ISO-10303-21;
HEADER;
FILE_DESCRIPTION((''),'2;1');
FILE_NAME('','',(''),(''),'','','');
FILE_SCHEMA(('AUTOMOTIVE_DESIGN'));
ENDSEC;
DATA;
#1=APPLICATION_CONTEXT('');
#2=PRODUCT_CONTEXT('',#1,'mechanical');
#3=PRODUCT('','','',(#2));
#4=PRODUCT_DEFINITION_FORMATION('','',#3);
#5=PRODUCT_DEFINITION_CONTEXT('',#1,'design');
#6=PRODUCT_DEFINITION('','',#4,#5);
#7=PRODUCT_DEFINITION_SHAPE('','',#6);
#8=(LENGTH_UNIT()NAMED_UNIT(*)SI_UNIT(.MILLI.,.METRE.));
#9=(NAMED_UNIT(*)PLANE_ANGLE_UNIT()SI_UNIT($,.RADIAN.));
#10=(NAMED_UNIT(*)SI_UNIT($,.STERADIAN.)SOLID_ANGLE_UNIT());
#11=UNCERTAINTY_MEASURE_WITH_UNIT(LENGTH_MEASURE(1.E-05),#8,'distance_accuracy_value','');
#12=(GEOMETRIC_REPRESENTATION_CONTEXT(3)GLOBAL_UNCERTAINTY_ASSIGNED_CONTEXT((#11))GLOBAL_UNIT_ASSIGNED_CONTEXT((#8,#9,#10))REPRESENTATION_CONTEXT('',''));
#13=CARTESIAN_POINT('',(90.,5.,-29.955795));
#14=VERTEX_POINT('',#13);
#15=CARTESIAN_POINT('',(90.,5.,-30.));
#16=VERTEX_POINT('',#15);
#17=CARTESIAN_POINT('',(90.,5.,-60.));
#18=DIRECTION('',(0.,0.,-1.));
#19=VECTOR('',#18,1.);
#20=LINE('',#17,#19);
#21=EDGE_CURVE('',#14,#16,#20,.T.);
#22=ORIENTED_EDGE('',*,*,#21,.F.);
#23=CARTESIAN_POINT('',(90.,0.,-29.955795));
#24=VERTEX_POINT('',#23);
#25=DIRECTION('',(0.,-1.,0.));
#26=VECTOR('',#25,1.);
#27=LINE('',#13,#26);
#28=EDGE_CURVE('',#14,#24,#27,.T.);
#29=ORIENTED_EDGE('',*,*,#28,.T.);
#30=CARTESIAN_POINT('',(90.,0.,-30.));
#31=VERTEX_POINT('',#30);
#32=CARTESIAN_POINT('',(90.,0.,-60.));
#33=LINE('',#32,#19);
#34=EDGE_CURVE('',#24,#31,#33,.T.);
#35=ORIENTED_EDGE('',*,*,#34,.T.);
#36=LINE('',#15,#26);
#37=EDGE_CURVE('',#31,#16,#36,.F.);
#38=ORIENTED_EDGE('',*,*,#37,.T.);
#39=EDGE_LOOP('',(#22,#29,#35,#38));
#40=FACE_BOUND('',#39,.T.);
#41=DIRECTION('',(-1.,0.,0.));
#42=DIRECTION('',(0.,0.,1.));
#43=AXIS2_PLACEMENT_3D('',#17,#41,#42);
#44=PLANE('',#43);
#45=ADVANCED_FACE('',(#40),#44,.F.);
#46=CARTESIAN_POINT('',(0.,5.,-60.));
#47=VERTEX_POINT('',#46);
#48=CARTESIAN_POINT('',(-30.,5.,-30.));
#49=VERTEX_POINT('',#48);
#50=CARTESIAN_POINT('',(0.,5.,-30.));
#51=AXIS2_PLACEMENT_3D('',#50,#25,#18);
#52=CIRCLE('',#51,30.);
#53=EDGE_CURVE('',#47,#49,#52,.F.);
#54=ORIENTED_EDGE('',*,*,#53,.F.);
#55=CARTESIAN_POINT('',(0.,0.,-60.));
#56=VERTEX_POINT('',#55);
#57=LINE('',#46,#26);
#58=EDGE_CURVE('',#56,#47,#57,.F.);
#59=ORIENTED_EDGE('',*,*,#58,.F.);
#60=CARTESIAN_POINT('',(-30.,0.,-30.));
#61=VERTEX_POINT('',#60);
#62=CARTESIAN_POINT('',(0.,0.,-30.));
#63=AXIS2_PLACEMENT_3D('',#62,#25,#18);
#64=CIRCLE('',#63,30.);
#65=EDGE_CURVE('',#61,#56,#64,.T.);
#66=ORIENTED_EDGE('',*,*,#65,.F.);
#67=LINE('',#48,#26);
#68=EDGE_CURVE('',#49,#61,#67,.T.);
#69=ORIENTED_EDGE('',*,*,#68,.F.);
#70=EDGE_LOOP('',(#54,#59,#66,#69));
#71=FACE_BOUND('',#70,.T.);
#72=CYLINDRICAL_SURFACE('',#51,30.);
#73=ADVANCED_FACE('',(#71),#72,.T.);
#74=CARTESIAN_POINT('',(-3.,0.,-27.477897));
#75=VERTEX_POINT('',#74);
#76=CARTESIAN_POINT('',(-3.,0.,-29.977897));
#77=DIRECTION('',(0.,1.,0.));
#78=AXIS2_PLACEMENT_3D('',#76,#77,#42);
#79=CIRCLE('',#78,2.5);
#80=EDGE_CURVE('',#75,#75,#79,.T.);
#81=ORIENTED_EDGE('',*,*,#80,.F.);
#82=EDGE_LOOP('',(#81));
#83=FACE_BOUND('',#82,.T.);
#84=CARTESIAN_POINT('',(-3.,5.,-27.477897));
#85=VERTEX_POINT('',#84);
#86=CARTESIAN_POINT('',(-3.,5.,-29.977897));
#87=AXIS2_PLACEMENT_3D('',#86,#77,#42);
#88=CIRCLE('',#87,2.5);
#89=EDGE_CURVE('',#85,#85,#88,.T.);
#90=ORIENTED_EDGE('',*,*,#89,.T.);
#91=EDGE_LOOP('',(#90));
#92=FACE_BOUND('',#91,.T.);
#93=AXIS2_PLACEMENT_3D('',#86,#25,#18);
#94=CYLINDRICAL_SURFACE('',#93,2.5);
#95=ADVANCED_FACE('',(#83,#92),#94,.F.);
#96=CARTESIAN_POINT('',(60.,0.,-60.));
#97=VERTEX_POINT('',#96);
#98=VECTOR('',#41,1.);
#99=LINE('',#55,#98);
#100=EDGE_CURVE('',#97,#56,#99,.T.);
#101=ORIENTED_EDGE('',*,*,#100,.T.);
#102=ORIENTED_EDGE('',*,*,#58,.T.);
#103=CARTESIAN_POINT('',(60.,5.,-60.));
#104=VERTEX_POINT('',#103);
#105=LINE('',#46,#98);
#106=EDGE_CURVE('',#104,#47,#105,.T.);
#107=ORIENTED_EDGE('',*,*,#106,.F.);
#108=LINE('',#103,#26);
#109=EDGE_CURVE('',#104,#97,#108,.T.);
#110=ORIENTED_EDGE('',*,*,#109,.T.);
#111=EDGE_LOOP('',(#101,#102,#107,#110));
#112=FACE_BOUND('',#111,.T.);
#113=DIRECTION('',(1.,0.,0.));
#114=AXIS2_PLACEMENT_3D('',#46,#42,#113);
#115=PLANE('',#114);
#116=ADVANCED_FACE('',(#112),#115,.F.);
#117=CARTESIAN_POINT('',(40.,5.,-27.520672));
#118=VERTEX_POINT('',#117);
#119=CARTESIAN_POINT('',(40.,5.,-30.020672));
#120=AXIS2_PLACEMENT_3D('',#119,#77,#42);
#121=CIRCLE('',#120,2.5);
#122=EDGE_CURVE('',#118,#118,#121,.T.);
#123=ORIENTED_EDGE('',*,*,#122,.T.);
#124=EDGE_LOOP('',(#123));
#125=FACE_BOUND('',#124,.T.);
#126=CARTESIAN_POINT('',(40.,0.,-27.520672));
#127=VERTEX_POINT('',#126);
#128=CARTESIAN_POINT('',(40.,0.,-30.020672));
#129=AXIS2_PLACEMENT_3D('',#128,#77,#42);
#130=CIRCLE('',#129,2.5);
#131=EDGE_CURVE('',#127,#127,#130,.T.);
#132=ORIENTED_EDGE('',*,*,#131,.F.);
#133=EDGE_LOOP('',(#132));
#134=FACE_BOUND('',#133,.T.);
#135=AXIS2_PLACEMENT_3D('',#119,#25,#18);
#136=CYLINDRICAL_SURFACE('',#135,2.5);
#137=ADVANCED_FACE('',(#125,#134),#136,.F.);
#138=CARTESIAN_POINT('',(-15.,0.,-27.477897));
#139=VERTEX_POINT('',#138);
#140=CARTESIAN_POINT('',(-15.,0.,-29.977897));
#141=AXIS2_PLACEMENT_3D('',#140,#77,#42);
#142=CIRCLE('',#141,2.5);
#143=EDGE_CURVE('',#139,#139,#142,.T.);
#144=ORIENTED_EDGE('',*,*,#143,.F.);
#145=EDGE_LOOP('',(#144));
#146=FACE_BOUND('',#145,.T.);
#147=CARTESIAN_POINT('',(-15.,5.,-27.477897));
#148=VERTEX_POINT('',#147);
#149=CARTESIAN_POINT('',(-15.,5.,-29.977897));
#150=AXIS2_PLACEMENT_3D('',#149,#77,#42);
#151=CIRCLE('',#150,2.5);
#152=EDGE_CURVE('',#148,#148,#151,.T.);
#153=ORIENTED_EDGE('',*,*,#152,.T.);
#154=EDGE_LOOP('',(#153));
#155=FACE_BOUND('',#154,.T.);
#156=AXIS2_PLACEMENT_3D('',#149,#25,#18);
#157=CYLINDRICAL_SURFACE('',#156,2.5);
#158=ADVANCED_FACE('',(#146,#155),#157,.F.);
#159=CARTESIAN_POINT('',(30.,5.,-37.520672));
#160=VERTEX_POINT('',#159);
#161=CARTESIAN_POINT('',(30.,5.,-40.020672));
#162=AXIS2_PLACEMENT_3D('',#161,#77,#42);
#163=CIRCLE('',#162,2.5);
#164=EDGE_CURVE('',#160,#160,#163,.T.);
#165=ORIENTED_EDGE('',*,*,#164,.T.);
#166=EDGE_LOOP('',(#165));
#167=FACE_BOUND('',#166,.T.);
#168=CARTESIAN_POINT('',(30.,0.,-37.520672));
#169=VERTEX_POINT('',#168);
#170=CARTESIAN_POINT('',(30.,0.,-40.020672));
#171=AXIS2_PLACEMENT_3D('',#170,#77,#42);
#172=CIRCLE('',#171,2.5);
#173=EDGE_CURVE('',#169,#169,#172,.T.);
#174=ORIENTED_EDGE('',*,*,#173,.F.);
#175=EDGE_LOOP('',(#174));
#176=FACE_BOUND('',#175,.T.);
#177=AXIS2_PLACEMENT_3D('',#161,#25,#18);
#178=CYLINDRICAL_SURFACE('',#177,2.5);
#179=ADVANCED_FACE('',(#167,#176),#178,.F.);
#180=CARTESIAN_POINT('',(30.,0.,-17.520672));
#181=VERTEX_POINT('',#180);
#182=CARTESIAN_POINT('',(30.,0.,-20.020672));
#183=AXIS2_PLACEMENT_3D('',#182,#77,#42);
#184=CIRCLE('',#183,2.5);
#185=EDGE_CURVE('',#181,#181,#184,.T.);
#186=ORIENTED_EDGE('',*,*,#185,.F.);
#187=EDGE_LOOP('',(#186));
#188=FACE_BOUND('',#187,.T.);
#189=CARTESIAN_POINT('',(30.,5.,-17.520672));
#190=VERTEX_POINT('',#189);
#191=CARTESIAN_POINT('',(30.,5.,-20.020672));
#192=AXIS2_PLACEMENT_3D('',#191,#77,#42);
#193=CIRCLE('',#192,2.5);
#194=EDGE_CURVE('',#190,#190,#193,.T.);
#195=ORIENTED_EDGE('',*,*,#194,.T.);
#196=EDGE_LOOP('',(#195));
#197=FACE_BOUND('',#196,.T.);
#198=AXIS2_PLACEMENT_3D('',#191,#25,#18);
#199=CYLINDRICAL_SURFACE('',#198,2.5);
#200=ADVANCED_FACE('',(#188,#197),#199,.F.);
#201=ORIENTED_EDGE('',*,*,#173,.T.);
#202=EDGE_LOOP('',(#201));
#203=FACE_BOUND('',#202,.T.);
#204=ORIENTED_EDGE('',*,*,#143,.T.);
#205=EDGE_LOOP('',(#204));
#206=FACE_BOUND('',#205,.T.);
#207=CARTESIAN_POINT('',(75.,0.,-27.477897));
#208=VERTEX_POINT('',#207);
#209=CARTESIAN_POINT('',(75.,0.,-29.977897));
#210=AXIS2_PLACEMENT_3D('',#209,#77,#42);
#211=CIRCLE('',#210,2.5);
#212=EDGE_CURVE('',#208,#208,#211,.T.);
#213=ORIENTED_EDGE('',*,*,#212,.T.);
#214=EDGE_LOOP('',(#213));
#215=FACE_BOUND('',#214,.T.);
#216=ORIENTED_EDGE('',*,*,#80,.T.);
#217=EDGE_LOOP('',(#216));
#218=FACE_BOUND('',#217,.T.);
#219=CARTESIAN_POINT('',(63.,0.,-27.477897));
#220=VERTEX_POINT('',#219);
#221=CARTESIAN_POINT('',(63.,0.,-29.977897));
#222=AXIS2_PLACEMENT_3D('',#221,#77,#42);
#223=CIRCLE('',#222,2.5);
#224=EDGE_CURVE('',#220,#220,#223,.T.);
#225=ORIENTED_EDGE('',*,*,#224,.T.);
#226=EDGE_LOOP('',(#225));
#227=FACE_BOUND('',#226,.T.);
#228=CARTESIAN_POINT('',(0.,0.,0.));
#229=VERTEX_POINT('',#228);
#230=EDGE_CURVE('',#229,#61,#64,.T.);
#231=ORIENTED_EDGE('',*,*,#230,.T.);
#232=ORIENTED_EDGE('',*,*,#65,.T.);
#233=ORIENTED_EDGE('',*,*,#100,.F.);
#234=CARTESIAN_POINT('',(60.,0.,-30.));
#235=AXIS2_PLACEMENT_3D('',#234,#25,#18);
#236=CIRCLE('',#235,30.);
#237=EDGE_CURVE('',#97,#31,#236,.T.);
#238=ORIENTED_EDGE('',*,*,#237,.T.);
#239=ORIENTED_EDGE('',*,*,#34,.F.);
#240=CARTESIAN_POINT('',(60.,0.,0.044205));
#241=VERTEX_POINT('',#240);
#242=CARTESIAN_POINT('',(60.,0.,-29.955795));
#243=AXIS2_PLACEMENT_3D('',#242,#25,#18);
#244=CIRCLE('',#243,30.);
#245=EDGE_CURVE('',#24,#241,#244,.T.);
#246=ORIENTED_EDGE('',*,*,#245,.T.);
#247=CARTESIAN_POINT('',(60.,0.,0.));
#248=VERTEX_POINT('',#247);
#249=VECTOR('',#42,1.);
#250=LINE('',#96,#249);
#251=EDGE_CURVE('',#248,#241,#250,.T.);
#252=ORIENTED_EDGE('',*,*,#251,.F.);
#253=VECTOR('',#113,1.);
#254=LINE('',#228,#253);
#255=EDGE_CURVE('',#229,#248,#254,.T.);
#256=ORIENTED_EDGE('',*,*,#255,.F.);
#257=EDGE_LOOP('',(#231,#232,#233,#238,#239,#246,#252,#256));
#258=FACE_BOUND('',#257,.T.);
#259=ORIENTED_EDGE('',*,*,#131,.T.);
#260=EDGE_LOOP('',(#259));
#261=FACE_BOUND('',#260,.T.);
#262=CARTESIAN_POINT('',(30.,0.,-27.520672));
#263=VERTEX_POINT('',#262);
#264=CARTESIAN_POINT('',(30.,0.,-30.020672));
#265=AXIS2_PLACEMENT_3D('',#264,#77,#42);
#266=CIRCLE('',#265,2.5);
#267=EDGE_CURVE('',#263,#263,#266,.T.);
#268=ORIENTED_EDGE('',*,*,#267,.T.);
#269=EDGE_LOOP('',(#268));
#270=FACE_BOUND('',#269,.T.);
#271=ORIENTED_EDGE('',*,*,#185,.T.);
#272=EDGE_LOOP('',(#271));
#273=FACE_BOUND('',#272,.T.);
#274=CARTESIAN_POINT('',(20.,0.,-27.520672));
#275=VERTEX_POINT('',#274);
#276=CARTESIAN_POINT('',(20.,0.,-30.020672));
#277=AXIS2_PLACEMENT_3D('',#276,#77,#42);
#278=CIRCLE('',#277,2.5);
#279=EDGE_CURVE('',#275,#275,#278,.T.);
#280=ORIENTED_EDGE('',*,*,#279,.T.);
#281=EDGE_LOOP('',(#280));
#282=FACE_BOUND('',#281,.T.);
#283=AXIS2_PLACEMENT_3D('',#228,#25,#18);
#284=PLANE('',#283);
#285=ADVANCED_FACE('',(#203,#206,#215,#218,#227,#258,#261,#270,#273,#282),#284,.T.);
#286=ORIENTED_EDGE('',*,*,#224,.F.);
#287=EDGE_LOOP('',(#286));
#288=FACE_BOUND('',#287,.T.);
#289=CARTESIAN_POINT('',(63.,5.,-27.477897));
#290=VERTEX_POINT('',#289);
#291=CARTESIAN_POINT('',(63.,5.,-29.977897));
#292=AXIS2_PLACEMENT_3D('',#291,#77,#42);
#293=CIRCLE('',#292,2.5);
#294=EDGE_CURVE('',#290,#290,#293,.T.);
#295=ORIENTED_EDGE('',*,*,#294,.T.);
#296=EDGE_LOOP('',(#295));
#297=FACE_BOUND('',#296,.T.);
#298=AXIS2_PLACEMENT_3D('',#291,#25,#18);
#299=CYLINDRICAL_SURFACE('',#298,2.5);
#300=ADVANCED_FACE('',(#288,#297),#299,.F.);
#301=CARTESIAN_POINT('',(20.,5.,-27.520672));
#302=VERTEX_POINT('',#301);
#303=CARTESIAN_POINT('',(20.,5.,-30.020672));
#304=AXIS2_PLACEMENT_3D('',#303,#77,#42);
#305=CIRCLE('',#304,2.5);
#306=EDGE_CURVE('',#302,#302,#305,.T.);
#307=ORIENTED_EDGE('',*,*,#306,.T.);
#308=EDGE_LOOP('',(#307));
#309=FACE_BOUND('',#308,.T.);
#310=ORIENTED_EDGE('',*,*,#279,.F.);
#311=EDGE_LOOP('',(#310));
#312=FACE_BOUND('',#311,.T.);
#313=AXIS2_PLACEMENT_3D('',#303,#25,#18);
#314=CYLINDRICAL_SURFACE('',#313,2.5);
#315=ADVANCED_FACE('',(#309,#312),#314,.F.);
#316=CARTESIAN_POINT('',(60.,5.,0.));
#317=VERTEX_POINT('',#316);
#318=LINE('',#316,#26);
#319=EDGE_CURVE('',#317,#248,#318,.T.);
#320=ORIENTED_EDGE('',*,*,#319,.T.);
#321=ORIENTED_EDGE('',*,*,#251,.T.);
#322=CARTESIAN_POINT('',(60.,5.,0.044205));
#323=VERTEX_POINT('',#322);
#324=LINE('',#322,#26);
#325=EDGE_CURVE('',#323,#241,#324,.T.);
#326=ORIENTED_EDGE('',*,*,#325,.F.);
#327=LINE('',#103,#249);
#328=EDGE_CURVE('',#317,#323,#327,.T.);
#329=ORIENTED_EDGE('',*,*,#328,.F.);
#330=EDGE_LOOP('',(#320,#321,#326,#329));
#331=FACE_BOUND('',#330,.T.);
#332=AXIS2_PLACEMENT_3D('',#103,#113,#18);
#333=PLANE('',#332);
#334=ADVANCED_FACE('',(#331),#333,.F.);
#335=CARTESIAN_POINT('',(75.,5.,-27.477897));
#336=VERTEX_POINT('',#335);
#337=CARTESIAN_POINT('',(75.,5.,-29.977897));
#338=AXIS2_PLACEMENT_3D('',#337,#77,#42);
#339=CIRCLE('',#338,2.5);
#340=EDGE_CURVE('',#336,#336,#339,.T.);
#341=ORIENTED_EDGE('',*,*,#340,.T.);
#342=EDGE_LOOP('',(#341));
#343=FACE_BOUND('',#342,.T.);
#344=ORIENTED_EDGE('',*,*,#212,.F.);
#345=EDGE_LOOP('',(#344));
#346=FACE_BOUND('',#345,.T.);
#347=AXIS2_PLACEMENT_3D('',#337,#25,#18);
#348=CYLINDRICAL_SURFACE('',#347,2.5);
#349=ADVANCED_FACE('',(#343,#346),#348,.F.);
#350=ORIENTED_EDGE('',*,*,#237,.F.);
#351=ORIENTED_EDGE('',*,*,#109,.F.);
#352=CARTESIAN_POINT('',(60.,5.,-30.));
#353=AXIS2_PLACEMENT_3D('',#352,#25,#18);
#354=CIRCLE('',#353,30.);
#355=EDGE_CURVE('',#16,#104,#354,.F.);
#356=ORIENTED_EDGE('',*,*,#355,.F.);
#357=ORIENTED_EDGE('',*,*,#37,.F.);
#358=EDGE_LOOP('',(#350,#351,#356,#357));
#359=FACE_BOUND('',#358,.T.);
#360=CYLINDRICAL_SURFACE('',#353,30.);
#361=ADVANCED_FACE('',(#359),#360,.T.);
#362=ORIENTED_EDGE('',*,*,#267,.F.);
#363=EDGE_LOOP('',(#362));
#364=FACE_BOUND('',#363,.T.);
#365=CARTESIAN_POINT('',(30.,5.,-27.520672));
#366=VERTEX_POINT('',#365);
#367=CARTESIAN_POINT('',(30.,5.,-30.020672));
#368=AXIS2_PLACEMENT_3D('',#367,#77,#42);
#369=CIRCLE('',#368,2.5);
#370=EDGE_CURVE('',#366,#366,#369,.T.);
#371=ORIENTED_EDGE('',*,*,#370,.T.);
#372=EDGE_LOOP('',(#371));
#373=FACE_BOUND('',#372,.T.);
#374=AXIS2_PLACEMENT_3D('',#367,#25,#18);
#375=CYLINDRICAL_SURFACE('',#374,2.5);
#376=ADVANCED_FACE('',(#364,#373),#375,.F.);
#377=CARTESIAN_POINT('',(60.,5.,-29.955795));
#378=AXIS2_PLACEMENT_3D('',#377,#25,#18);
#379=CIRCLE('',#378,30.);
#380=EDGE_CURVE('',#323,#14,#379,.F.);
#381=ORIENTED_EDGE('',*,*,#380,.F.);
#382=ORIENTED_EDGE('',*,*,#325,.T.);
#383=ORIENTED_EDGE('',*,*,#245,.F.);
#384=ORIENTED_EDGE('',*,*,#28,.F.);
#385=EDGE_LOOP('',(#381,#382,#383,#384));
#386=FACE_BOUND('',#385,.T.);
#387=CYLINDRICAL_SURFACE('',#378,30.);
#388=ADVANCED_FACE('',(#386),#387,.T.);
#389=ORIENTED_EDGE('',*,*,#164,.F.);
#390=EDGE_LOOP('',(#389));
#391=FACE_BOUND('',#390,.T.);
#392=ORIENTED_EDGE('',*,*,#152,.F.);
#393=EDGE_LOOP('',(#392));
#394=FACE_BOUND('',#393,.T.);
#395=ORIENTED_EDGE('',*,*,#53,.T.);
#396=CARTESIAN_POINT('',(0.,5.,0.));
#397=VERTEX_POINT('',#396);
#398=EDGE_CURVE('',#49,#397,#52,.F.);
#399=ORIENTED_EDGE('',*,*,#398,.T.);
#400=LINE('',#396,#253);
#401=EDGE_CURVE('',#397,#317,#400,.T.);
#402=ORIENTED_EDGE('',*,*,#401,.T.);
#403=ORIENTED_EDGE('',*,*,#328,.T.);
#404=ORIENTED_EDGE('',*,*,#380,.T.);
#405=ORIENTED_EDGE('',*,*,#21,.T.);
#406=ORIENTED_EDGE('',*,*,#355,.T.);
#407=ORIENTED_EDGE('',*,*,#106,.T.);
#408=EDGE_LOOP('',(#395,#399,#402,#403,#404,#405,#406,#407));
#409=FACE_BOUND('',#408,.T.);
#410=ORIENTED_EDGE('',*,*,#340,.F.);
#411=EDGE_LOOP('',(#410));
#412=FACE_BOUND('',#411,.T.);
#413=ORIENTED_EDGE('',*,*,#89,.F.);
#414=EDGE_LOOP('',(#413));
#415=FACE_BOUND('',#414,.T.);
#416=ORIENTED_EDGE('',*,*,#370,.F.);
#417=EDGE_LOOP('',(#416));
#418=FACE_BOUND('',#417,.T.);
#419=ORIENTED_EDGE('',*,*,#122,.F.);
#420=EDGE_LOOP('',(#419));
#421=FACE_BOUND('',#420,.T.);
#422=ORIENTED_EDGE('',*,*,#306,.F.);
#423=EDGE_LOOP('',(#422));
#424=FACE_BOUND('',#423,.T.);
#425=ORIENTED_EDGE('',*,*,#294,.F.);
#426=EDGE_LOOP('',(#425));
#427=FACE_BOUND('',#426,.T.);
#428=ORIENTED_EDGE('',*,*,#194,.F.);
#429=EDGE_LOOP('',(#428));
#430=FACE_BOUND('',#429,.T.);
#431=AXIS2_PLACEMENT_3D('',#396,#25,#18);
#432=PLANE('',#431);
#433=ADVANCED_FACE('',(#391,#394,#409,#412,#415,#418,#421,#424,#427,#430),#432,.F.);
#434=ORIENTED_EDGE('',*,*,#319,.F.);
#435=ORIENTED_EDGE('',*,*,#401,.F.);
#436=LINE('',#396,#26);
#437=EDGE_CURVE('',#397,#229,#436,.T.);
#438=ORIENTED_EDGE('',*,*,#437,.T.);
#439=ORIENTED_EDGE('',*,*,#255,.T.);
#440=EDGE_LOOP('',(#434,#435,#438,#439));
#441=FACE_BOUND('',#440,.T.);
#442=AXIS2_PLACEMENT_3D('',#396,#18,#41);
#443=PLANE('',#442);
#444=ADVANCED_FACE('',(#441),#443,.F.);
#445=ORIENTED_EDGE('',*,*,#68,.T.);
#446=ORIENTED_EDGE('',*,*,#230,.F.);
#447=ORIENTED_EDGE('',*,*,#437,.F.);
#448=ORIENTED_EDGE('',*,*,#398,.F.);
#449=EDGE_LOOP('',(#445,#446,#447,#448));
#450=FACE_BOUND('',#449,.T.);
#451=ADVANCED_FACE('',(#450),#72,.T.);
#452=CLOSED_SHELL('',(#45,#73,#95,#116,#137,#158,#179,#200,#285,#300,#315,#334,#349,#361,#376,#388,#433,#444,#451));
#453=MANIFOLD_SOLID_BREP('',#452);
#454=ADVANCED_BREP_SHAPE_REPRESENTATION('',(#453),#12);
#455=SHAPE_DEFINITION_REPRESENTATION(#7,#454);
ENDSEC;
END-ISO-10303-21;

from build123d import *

# Parameters (mm, degrees)
SKETCH1_W           = 60
SKETCH1_H           = 60
SKETCH1_R           = 2.5
BOSS_EXTRUDE2_DEPTH = 5
SKETCH4_W           = 30
SKETCH4_H           = 60.044205022
SKETCH4_R           = 2.5
SKETCH4_H_2         = 60
BOSS_EXTRUDE5_DEPTH = 5
FILLET1_R           = 30


with BuildPart() as part:
    # Sketch1 → Boss-Extrude2 (new body)
    with BuildSketch(Plane(origin=(0, 0, 0), x_dir=(1, 0, 0), z_dir=(0, 1, 0))):
        with Locations((30, 30)):
            Rectangle(SKETCH1_W, SKETCH1_H)
        with Locations(Location((30, 40.020671676, 0), (0, 0, 270))):
            Circle(SKETCH1_R, mode=Mode.SUBTRACT)
        with Locations(Location((20, 30.020671676, 0), (0, 0, 270))):
            Circle(SKETCH1_R, mode=Mode.SUBTRACT)
        with Locations(Location((30, 20.020671676, 0), (0, 0, 270))):
            Circle(SKETCH1_R, mode=Mode.SUBTRACT)
        with Locations(Location((40, 30.020671676, 0), (0, 0, 270))):
            Circle(SKETCH1_R, mode=Mode.SUBTRACT)
        with Locations(Location((30, 30.020671676, 0), (0, 0, 270))):
            Circle(SKETCH1_R, mode=Mode.SUBTRACT)
    extrude(amount=BOSS_EXTRUDE2_DEPTH)

    # Sketch4 → Boss-Extrude5 (add)
    # profile 1 of 2: a face of its own
    with BuildSketch(Plane(origin=(0, 0, 0), x_dir=(1, 0, 0), z_dir=(0, 1, 0))):
        with Locations((75, 29.977897489)):
            Rectangle(SKETCH4_W, SKETCH4_H)
        with Locations(Location((63, 29.977897489, 0), (0, 0, 270))):
            Circle(SKETCH4_R, mode=Mode.SUBTRACT)
        with Locations(Location((75, 29.977897489, 0), (0, 0, 270))):
            Circle(SKETCH4_R, mode=Mode.SUBTRACT)
    # profile 2 of 2: a face of its own
    with BuildSketch(Plane(origin=(0, 0, 0), x_dir=(1, 0, 0), z_dir=(0, 1, 0))):
        with Locations((-15, 30)):
            Rectangle(SKETCH4_W, SKETCH4_H_2)
        with Locations(Location((-3, 29.977897489, 0), (0, 0, 270))):
            Circle(SKETCH4_R, mode=Mode.SUBTRACT)
        with Locations(Location((-15, 29.977897489, 0), (0, 0, 270))):
            Circle(SKETCH4_R, mode=Mode.SUBTRACT)
    extrude(amount=BOSS_EXTRUDE5_DEPTH)

    # Fillet1
    fillet1_edges = [part.edges().sort_by_distance(p)[0] for p in [
        (-30, 2.5, 0),
        (-30, 2.5, -60),
        (90, 2.5, 0.044205022),
        (90, 2.5, -60),
    ]]
    fillet(fillet1_edges, radius=FILLET1_R - 0.0001)  # a hair under: the kernel refuses the full size


solid = part.part
